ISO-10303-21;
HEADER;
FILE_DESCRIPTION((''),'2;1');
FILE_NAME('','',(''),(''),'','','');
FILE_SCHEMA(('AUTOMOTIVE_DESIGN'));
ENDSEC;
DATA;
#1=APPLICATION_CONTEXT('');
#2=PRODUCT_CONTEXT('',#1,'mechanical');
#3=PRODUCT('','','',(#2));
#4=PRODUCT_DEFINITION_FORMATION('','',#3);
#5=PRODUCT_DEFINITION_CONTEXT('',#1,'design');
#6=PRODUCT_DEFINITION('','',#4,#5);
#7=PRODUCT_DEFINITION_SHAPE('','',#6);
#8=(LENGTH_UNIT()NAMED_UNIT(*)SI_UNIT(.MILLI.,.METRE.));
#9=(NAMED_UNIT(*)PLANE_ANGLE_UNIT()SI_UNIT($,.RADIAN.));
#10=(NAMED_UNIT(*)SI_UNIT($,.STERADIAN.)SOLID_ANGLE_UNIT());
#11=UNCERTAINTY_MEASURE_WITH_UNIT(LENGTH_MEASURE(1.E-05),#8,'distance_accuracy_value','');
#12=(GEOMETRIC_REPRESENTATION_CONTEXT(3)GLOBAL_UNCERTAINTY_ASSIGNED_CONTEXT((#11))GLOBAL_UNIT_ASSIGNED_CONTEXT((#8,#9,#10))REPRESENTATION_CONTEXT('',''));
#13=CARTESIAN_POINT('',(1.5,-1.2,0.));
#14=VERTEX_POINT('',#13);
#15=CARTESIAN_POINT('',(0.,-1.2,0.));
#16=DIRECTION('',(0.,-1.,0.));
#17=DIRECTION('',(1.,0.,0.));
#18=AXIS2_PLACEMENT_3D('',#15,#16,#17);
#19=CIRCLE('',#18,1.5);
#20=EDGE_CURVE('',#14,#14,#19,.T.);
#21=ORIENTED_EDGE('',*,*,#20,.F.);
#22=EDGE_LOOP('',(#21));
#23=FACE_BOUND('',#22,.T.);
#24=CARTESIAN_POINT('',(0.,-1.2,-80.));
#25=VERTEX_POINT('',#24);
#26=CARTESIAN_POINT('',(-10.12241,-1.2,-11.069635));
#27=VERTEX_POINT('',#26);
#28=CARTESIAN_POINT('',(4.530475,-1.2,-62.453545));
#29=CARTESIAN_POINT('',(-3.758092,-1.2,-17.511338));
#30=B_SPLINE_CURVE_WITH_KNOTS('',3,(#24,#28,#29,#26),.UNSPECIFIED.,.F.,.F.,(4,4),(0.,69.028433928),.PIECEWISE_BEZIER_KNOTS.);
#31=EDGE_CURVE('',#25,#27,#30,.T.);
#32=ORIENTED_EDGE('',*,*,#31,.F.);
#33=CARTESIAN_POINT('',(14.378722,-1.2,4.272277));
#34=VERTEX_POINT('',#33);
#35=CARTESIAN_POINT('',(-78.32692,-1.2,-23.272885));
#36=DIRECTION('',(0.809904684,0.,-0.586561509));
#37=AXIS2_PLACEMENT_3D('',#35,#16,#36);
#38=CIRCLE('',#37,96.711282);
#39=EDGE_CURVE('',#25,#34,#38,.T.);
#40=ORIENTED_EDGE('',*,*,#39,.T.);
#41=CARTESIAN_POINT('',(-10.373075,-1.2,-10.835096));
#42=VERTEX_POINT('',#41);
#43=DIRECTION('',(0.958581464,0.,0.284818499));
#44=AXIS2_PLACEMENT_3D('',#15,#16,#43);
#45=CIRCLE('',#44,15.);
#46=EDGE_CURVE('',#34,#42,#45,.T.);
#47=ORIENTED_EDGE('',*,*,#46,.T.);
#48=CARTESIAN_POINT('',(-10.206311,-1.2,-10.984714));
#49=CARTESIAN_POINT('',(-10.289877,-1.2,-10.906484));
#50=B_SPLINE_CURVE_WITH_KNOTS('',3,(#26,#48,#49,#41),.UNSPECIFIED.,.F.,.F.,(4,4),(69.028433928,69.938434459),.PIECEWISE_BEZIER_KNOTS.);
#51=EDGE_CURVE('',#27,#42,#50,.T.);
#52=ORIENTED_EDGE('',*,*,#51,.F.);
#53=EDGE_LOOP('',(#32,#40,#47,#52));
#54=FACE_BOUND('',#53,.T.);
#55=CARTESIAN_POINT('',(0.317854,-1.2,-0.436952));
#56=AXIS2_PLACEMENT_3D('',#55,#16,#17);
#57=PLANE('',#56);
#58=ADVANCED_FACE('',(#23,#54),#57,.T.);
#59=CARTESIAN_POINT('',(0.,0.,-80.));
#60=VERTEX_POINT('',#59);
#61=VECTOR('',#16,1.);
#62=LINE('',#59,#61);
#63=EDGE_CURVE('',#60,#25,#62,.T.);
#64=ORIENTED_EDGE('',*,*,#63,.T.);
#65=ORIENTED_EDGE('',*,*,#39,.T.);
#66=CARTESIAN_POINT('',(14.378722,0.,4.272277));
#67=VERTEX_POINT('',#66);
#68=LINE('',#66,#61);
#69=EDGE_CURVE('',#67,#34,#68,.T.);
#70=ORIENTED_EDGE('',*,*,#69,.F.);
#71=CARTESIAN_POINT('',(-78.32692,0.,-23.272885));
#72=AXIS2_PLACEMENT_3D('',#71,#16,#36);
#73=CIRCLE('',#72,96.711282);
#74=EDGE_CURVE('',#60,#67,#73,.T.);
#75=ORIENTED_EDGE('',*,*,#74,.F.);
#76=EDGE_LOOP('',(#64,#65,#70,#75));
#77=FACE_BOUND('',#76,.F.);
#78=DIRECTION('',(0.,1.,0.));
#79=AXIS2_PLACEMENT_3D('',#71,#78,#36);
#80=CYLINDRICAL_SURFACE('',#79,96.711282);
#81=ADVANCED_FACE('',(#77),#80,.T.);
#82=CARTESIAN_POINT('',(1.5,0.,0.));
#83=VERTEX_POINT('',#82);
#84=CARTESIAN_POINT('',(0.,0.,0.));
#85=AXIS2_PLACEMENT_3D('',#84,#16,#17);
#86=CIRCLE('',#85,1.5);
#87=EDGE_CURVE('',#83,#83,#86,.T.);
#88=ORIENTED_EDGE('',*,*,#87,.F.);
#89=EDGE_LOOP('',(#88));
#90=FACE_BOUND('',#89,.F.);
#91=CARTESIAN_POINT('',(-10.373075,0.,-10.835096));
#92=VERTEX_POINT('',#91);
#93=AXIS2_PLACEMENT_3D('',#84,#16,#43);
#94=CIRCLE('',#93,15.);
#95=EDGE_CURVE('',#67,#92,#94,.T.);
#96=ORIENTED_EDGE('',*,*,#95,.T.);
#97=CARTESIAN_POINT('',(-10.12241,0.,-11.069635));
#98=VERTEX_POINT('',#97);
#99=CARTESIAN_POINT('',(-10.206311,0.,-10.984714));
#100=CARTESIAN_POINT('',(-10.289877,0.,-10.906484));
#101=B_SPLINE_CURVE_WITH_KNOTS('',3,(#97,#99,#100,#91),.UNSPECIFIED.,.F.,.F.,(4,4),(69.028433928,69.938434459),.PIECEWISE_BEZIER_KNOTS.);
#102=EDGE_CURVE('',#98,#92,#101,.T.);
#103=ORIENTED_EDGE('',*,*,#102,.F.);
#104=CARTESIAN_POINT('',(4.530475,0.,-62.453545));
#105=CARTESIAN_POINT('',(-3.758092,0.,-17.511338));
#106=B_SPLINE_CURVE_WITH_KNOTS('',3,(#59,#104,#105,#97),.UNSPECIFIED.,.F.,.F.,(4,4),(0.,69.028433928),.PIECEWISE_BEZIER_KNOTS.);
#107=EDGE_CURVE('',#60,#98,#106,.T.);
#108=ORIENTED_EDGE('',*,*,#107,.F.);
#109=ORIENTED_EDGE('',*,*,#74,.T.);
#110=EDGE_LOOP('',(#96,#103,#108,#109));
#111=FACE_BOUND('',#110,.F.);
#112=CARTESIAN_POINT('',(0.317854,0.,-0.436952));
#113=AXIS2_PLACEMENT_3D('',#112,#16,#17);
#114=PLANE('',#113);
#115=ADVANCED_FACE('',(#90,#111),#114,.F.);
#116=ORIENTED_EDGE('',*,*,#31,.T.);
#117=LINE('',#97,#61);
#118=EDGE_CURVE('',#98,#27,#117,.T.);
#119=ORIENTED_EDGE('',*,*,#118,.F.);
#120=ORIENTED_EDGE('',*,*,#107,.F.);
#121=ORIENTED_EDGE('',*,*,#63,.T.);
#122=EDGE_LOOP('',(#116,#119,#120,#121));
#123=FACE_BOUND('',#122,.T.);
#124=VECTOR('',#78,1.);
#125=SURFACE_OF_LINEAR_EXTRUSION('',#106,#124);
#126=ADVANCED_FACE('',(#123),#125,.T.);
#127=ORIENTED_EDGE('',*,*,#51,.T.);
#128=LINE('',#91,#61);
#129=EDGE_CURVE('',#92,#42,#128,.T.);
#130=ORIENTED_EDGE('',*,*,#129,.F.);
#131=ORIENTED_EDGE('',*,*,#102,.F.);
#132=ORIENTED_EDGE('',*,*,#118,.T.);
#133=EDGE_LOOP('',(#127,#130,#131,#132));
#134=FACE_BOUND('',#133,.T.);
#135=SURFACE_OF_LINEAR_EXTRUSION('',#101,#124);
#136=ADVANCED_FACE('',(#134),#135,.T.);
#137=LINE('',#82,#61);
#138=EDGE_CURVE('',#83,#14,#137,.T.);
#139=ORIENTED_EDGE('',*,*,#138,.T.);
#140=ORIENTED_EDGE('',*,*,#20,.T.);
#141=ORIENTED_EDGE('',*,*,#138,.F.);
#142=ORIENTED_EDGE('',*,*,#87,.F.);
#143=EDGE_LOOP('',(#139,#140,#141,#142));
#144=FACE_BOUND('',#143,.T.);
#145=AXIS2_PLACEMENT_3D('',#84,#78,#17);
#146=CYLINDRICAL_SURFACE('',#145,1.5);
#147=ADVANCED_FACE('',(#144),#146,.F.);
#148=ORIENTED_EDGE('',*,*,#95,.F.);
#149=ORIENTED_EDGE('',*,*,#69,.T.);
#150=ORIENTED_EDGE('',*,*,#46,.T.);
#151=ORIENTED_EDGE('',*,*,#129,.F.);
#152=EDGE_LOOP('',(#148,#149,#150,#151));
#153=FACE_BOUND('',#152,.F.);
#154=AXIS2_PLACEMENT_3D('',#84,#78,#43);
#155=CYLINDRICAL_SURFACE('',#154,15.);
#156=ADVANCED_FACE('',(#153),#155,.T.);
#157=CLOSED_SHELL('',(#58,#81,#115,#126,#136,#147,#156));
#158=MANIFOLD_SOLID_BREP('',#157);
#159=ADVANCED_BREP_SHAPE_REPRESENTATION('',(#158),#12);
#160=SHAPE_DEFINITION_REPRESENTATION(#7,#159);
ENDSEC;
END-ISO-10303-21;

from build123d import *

# Parameters (mm, degrees)
F0_R     = 1.5
F1_DEPTH = 1.2


# Not quite as in the source:
# - a feature names something its author has since deleted; it is built from what else it names


with BuildPart() as f1:
    # F0 (on Front) → F1 (new body)
    with BuildSketch(Plane.XZ):
        with BuildLine():
            ThreePointArc((-10.1224102731, -11.0696346038), (6.0482991784, -13.7265464356), (15, 0))
            ThreePointArc((15, 0), (14.8438679143, 2.1586072693), (14.3787219542, 4.2722774913))
            ThreePointArc((14.3787219542, 4.2722774913), (-7.8146967903, 12.8035352179), (-10.3730753026, -10.8350961587))
            add(Edge.make_bspline(
                [(-10.1224102731, -11.0696346038), (-10.2063109594, -10.9847137567), (-10.2898772286, -10.9064839504), (-10.3730753026, -10.8350961587)],
                knots=[69.0284339282, 69.0284339282, 69.0284339282, 69.0284339282, 69.9384344593, 69.9384344593, 69.9384344593, 69.9384344593], degree=3))
        make_face()
        Circle(F0_R, mode=Mode.SUBTRACT)
        with BuildLine():
            ThreePointArc((14.3787219542, 4.2722774913), (14.8438679143, 2.1586072693), (15, 0))
            ThreePointArc((15, 0), (6.0482991784, -13.7265464356), (-10.1224102731, -11.0696346038))
            add(Edge.make_bspline(
                [(0, -80), (4.5304750858, -62.4535454421), (-3.758092031, -17.5113375297), (-10.1224102731, -11.0696346038)],
                knots=[0, 0, 0, 0, 69.0284339282, 69.0284339282, 69.0284339282, 69.0284339282], degree=3))
            ThreePointArc((0, -80), (17.0066443872, -39.5389078142), (14.3787219542, 4.2722774913))
        make_face()
    extrude(amount=F1_DEPTH)


solid = f1.part
